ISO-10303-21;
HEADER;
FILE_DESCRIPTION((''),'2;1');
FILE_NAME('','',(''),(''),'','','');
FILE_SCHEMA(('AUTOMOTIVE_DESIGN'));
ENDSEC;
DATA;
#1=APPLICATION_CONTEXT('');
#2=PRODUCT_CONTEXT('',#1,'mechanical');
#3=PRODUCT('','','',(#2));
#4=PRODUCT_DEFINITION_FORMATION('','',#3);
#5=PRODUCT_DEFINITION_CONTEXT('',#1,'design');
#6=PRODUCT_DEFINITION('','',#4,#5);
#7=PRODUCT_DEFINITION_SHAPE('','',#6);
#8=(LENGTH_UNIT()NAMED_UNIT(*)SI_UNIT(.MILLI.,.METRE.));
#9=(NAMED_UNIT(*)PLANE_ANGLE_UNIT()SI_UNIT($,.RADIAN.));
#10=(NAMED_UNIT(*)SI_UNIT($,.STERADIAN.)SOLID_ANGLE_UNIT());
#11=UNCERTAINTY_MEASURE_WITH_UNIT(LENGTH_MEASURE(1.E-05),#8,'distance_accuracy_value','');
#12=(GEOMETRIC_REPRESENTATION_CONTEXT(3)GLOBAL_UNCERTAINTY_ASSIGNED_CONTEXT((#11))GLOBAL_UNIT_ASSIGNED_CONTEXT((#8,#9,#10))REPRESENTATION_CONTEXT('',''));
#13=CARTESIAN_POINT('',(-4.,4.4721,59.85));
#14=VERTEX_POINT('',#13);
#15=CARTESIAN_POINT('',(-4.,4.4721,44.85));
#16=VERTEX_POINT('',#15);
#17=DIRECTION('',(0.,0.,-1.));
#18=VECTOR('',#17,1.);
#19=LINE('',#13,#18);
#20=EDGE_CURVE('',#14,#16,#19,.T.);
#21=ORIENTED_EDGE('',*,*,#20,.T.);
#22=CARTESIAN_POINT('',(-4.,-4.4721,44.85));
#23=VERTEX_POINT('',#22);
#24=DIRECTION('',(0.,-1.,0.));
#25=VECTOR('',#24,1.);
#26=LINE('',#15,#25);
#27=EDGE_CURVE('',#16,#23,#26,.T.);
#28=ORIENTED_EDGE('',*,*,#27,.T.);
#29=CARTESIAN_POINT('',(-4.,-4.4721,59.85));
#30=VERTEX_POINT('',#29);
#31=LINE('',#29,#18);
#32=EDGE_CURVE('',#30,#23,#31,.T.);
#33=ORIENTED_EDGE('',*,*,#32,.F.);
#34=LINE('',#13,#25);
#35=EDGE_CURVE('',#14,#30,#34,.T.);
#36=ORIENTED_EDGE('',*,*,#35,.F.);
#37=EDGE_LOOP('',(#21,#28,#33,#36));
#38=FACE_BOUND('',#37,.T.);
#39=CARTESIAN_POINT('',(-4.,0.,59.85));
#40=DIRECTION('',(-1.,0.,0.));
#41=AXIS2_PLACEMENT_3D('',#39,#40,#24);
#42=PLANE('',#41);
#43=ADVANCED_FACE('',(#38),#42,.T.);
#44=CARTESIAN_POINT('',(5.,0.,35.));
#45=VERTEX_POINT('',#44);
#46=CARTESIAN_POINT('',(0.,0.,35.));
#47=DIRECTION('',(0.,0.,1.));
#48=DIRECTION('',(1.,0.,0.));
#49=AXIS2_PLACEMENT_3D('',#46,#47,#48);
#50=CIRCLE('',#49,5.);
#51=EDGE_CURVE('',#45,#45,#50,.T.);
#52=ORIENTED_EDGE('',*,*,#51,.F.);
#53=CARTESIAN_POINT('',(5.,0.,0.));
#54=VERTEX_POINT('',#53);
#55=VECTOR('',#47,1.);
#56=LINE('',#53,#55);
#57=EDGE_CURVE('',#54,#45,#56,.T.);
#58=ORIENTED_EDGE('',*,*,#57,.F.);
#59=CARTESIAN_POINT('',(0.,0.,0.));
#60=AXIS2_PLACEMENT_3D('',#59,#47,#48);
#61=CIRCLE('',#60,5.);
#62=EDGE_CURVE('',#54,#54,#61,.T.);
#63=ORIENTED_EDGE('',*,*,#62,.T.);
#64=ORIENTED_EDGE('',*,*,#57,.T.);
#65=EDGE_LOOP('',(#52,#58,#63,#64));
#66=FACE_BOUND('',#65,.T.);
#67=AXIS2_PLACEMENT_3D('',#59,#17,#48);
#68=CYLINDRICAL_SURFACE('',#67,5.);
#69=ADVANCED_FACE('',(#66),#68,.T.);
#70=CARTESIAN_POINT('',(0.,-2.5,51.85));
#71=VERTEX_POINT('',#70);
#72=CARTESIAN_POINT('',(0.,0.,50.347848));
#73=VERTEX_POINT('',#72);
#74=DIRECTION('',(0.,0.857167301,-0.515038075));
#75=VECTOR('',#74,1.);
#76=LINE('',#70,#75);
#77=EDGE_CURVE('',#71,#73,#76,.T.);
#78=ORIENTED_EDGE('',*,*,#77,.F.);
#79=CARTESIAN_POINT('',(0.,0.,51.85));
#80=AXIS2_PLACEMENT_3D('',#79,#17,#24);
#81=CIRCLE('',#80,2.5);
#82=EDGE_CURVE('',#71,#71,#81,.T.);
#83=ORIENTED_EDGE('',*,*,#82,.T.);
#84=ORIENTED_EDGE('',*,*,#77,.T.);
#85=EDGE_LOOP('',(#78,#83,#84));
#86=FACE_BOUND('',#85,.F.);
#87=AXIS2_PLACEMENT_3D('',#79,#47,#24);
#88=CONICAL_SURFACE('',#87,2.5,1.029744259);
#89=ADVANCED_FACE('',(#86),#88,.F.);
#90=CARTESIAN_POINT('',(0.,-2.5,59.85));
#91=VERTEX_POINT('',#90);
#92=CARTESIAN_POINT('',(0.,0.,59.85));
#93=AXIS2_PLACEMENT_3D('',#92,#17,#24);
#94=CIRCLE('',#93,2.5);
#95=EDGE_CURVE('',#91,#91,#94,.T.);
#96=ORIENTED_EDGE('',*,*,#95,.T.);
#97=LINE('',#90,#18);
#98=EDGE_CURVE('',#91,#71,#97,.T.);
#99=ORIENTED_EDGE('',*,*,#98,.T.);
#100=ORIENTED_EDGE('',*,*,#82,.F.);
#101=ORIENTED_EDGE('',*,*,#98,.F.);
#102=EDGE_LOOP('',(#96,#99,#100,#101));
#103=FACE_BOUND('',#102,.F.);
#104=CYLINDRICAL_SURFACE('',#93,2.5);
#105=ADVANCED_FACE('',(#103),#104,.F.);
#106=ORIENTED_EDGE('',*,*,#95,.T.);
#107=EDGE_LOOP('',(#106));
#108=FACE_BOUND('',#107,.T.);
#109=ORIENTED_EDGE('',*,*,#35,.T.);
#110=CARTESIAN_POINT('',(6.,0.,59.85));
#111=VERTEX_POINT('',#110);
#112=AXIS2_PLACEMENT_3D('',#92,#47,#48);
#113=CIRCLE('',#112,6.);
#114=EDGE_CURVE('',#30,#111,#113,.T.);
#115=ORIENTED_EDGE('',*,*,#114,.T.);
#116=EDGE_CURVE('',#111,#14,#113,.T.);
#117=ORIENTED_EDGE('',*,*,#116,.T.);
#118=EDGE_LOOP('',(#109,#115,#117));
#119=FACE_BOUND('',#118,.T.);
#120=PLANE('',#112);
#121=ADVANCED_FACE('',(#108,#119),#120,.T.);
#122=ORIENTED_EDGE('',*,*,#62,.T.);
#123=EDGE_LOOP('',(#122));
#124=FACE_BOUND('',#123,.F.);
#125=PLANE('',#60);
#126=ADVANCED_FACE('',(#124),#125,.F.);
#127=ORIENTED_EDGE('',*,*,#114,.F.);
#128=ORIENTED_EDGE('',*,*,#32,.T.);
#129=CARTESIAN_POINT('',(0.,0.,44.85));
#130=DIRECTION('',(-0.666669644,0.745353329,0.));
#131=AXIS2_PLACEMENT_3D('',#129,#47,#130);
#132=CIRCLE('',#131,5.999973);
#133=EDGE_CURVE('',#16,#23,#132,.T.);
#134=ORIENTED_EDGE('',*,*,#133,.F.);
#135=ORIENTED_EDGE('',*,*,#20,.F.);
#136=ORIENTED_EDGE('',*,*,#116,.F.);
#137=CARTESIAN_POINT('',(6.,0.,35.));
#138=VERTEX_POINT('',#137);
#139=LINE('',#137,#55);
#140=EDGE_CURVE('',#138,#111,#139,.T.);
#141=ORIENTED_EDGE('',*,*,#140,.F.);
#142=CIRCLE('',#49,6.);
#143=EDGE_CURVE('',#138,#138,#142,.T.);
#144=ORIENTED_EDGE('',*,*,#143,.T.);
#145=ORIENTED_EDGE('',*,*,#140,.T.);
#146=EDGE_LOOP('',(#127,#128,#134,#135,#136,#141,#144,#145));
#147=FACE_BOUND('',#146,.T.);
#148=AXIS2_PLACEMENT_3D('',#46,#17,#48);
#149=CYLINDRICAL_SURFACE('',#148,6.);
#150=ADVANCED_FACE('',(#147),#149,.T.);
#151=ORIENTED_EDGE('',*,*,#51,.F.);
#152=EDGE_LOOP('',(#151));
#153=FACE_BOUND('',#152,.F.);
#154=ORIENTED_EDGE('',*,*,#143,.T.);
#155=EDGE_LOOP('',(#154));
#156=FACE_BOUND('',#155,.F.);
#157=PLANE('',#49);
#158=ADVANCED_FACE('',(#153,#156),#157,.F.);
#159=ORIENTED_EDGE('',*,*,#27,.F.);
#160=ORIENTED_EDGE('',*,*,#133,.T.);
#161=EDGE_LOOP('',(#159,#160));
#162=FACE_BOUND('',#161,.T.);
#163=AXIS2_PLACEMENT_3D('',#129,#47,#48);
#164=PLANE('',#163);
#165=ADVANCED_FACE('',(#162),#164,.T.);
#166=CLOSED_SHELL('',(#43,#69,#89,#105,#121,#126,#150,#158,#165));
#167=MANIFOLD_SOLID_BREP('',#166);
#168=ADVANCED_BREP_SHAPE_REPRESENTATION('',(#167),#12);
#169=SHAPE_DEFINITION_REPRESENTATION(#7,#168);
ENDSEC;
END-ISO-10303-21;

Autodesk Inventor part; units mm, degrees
ref_plane "YZ Plane" through (0, 0, 0) normal (1, 0, 0) x (0, 1, 0)
ref_plane "XZ Plane" through (0, 0, 0) normal (0, 1, 0) x (-1, 0, 0)
sketch "スケッチ1" plane through (0, 0, 0) normal (0, 0, 1) x (1, 0, 0)
  point P0 (0, 0)
sketch "スケッチ2" plane through (0, 0, 0) normal (0, 0, 1) x (1, 0, 0)
  circle A0 centre (0, 0) radius 5
  dimension "d0" = 10
extrude "押し出し1" add sketch "スケッチ2" along normal blind 35
thread "ねじ1" size "M10x1.5" class "6g" standard "ANSI Metric M Profile" length 10
sketch "スケッチ3" plane through (0, 0, 35) normal (0, 0, 1) x (1, 0, 0)
  point P0 (0, 0)
sketch "スケッチ4" plane through (0, 0, 35) normal (0, 0, 1) x (1, 0, 0)
  circle A0 centre (0, 0) radius 6
  dimension "d5" = 12
extrude "押し出し2" add sketch "スケッチ4" along normal blind 24.85
sketch "スケッチ5" plane through (0, 0, 59.85) normal (0, 0, 1) x (1, 0, 0)
  line L0 (0, 0) -> (0, 6)
  circle A0 centre (0, 0) radius 6 projected
ref_plane "作業平面1" through (0, 6, 59.85) normal (0, 1, 0) x (-1, 0, 0)
sketch "スケッチ9" plane through (0, 0, 59.85) normal (0, 0, 1) x (1, 0, 0)
  point P0 (0, 0)
  point P1 (0, 0)
hole "穴2" at (0, 0, 59.85) direction (0, 0, -1) diameter 5 depth 8 tip angle 118
thread "ねじ3" size "M5x0.8" class "6H" standard "ANSI Metric M Profile" full length
sketch "スケッチ10" plane through (0, 0, 59.85) normal (0, 0, 1) x (1, 0, 0)
  arc A0 (-4, 4.4721) -> (-4, -4.4721) centre (0, 0) ccw
  line L0 (-4, 0) -> (-4, 4.4721)
  line L1 (-4, 0) -> (-4, -4.4721)
  dimension "d34" = 12
  dimension "d35" = 4
extrude "押し出し4" cut sketch "スケッチ10" against normal blind 15
properties part number "回転アーム付き計測輪シャフト"
